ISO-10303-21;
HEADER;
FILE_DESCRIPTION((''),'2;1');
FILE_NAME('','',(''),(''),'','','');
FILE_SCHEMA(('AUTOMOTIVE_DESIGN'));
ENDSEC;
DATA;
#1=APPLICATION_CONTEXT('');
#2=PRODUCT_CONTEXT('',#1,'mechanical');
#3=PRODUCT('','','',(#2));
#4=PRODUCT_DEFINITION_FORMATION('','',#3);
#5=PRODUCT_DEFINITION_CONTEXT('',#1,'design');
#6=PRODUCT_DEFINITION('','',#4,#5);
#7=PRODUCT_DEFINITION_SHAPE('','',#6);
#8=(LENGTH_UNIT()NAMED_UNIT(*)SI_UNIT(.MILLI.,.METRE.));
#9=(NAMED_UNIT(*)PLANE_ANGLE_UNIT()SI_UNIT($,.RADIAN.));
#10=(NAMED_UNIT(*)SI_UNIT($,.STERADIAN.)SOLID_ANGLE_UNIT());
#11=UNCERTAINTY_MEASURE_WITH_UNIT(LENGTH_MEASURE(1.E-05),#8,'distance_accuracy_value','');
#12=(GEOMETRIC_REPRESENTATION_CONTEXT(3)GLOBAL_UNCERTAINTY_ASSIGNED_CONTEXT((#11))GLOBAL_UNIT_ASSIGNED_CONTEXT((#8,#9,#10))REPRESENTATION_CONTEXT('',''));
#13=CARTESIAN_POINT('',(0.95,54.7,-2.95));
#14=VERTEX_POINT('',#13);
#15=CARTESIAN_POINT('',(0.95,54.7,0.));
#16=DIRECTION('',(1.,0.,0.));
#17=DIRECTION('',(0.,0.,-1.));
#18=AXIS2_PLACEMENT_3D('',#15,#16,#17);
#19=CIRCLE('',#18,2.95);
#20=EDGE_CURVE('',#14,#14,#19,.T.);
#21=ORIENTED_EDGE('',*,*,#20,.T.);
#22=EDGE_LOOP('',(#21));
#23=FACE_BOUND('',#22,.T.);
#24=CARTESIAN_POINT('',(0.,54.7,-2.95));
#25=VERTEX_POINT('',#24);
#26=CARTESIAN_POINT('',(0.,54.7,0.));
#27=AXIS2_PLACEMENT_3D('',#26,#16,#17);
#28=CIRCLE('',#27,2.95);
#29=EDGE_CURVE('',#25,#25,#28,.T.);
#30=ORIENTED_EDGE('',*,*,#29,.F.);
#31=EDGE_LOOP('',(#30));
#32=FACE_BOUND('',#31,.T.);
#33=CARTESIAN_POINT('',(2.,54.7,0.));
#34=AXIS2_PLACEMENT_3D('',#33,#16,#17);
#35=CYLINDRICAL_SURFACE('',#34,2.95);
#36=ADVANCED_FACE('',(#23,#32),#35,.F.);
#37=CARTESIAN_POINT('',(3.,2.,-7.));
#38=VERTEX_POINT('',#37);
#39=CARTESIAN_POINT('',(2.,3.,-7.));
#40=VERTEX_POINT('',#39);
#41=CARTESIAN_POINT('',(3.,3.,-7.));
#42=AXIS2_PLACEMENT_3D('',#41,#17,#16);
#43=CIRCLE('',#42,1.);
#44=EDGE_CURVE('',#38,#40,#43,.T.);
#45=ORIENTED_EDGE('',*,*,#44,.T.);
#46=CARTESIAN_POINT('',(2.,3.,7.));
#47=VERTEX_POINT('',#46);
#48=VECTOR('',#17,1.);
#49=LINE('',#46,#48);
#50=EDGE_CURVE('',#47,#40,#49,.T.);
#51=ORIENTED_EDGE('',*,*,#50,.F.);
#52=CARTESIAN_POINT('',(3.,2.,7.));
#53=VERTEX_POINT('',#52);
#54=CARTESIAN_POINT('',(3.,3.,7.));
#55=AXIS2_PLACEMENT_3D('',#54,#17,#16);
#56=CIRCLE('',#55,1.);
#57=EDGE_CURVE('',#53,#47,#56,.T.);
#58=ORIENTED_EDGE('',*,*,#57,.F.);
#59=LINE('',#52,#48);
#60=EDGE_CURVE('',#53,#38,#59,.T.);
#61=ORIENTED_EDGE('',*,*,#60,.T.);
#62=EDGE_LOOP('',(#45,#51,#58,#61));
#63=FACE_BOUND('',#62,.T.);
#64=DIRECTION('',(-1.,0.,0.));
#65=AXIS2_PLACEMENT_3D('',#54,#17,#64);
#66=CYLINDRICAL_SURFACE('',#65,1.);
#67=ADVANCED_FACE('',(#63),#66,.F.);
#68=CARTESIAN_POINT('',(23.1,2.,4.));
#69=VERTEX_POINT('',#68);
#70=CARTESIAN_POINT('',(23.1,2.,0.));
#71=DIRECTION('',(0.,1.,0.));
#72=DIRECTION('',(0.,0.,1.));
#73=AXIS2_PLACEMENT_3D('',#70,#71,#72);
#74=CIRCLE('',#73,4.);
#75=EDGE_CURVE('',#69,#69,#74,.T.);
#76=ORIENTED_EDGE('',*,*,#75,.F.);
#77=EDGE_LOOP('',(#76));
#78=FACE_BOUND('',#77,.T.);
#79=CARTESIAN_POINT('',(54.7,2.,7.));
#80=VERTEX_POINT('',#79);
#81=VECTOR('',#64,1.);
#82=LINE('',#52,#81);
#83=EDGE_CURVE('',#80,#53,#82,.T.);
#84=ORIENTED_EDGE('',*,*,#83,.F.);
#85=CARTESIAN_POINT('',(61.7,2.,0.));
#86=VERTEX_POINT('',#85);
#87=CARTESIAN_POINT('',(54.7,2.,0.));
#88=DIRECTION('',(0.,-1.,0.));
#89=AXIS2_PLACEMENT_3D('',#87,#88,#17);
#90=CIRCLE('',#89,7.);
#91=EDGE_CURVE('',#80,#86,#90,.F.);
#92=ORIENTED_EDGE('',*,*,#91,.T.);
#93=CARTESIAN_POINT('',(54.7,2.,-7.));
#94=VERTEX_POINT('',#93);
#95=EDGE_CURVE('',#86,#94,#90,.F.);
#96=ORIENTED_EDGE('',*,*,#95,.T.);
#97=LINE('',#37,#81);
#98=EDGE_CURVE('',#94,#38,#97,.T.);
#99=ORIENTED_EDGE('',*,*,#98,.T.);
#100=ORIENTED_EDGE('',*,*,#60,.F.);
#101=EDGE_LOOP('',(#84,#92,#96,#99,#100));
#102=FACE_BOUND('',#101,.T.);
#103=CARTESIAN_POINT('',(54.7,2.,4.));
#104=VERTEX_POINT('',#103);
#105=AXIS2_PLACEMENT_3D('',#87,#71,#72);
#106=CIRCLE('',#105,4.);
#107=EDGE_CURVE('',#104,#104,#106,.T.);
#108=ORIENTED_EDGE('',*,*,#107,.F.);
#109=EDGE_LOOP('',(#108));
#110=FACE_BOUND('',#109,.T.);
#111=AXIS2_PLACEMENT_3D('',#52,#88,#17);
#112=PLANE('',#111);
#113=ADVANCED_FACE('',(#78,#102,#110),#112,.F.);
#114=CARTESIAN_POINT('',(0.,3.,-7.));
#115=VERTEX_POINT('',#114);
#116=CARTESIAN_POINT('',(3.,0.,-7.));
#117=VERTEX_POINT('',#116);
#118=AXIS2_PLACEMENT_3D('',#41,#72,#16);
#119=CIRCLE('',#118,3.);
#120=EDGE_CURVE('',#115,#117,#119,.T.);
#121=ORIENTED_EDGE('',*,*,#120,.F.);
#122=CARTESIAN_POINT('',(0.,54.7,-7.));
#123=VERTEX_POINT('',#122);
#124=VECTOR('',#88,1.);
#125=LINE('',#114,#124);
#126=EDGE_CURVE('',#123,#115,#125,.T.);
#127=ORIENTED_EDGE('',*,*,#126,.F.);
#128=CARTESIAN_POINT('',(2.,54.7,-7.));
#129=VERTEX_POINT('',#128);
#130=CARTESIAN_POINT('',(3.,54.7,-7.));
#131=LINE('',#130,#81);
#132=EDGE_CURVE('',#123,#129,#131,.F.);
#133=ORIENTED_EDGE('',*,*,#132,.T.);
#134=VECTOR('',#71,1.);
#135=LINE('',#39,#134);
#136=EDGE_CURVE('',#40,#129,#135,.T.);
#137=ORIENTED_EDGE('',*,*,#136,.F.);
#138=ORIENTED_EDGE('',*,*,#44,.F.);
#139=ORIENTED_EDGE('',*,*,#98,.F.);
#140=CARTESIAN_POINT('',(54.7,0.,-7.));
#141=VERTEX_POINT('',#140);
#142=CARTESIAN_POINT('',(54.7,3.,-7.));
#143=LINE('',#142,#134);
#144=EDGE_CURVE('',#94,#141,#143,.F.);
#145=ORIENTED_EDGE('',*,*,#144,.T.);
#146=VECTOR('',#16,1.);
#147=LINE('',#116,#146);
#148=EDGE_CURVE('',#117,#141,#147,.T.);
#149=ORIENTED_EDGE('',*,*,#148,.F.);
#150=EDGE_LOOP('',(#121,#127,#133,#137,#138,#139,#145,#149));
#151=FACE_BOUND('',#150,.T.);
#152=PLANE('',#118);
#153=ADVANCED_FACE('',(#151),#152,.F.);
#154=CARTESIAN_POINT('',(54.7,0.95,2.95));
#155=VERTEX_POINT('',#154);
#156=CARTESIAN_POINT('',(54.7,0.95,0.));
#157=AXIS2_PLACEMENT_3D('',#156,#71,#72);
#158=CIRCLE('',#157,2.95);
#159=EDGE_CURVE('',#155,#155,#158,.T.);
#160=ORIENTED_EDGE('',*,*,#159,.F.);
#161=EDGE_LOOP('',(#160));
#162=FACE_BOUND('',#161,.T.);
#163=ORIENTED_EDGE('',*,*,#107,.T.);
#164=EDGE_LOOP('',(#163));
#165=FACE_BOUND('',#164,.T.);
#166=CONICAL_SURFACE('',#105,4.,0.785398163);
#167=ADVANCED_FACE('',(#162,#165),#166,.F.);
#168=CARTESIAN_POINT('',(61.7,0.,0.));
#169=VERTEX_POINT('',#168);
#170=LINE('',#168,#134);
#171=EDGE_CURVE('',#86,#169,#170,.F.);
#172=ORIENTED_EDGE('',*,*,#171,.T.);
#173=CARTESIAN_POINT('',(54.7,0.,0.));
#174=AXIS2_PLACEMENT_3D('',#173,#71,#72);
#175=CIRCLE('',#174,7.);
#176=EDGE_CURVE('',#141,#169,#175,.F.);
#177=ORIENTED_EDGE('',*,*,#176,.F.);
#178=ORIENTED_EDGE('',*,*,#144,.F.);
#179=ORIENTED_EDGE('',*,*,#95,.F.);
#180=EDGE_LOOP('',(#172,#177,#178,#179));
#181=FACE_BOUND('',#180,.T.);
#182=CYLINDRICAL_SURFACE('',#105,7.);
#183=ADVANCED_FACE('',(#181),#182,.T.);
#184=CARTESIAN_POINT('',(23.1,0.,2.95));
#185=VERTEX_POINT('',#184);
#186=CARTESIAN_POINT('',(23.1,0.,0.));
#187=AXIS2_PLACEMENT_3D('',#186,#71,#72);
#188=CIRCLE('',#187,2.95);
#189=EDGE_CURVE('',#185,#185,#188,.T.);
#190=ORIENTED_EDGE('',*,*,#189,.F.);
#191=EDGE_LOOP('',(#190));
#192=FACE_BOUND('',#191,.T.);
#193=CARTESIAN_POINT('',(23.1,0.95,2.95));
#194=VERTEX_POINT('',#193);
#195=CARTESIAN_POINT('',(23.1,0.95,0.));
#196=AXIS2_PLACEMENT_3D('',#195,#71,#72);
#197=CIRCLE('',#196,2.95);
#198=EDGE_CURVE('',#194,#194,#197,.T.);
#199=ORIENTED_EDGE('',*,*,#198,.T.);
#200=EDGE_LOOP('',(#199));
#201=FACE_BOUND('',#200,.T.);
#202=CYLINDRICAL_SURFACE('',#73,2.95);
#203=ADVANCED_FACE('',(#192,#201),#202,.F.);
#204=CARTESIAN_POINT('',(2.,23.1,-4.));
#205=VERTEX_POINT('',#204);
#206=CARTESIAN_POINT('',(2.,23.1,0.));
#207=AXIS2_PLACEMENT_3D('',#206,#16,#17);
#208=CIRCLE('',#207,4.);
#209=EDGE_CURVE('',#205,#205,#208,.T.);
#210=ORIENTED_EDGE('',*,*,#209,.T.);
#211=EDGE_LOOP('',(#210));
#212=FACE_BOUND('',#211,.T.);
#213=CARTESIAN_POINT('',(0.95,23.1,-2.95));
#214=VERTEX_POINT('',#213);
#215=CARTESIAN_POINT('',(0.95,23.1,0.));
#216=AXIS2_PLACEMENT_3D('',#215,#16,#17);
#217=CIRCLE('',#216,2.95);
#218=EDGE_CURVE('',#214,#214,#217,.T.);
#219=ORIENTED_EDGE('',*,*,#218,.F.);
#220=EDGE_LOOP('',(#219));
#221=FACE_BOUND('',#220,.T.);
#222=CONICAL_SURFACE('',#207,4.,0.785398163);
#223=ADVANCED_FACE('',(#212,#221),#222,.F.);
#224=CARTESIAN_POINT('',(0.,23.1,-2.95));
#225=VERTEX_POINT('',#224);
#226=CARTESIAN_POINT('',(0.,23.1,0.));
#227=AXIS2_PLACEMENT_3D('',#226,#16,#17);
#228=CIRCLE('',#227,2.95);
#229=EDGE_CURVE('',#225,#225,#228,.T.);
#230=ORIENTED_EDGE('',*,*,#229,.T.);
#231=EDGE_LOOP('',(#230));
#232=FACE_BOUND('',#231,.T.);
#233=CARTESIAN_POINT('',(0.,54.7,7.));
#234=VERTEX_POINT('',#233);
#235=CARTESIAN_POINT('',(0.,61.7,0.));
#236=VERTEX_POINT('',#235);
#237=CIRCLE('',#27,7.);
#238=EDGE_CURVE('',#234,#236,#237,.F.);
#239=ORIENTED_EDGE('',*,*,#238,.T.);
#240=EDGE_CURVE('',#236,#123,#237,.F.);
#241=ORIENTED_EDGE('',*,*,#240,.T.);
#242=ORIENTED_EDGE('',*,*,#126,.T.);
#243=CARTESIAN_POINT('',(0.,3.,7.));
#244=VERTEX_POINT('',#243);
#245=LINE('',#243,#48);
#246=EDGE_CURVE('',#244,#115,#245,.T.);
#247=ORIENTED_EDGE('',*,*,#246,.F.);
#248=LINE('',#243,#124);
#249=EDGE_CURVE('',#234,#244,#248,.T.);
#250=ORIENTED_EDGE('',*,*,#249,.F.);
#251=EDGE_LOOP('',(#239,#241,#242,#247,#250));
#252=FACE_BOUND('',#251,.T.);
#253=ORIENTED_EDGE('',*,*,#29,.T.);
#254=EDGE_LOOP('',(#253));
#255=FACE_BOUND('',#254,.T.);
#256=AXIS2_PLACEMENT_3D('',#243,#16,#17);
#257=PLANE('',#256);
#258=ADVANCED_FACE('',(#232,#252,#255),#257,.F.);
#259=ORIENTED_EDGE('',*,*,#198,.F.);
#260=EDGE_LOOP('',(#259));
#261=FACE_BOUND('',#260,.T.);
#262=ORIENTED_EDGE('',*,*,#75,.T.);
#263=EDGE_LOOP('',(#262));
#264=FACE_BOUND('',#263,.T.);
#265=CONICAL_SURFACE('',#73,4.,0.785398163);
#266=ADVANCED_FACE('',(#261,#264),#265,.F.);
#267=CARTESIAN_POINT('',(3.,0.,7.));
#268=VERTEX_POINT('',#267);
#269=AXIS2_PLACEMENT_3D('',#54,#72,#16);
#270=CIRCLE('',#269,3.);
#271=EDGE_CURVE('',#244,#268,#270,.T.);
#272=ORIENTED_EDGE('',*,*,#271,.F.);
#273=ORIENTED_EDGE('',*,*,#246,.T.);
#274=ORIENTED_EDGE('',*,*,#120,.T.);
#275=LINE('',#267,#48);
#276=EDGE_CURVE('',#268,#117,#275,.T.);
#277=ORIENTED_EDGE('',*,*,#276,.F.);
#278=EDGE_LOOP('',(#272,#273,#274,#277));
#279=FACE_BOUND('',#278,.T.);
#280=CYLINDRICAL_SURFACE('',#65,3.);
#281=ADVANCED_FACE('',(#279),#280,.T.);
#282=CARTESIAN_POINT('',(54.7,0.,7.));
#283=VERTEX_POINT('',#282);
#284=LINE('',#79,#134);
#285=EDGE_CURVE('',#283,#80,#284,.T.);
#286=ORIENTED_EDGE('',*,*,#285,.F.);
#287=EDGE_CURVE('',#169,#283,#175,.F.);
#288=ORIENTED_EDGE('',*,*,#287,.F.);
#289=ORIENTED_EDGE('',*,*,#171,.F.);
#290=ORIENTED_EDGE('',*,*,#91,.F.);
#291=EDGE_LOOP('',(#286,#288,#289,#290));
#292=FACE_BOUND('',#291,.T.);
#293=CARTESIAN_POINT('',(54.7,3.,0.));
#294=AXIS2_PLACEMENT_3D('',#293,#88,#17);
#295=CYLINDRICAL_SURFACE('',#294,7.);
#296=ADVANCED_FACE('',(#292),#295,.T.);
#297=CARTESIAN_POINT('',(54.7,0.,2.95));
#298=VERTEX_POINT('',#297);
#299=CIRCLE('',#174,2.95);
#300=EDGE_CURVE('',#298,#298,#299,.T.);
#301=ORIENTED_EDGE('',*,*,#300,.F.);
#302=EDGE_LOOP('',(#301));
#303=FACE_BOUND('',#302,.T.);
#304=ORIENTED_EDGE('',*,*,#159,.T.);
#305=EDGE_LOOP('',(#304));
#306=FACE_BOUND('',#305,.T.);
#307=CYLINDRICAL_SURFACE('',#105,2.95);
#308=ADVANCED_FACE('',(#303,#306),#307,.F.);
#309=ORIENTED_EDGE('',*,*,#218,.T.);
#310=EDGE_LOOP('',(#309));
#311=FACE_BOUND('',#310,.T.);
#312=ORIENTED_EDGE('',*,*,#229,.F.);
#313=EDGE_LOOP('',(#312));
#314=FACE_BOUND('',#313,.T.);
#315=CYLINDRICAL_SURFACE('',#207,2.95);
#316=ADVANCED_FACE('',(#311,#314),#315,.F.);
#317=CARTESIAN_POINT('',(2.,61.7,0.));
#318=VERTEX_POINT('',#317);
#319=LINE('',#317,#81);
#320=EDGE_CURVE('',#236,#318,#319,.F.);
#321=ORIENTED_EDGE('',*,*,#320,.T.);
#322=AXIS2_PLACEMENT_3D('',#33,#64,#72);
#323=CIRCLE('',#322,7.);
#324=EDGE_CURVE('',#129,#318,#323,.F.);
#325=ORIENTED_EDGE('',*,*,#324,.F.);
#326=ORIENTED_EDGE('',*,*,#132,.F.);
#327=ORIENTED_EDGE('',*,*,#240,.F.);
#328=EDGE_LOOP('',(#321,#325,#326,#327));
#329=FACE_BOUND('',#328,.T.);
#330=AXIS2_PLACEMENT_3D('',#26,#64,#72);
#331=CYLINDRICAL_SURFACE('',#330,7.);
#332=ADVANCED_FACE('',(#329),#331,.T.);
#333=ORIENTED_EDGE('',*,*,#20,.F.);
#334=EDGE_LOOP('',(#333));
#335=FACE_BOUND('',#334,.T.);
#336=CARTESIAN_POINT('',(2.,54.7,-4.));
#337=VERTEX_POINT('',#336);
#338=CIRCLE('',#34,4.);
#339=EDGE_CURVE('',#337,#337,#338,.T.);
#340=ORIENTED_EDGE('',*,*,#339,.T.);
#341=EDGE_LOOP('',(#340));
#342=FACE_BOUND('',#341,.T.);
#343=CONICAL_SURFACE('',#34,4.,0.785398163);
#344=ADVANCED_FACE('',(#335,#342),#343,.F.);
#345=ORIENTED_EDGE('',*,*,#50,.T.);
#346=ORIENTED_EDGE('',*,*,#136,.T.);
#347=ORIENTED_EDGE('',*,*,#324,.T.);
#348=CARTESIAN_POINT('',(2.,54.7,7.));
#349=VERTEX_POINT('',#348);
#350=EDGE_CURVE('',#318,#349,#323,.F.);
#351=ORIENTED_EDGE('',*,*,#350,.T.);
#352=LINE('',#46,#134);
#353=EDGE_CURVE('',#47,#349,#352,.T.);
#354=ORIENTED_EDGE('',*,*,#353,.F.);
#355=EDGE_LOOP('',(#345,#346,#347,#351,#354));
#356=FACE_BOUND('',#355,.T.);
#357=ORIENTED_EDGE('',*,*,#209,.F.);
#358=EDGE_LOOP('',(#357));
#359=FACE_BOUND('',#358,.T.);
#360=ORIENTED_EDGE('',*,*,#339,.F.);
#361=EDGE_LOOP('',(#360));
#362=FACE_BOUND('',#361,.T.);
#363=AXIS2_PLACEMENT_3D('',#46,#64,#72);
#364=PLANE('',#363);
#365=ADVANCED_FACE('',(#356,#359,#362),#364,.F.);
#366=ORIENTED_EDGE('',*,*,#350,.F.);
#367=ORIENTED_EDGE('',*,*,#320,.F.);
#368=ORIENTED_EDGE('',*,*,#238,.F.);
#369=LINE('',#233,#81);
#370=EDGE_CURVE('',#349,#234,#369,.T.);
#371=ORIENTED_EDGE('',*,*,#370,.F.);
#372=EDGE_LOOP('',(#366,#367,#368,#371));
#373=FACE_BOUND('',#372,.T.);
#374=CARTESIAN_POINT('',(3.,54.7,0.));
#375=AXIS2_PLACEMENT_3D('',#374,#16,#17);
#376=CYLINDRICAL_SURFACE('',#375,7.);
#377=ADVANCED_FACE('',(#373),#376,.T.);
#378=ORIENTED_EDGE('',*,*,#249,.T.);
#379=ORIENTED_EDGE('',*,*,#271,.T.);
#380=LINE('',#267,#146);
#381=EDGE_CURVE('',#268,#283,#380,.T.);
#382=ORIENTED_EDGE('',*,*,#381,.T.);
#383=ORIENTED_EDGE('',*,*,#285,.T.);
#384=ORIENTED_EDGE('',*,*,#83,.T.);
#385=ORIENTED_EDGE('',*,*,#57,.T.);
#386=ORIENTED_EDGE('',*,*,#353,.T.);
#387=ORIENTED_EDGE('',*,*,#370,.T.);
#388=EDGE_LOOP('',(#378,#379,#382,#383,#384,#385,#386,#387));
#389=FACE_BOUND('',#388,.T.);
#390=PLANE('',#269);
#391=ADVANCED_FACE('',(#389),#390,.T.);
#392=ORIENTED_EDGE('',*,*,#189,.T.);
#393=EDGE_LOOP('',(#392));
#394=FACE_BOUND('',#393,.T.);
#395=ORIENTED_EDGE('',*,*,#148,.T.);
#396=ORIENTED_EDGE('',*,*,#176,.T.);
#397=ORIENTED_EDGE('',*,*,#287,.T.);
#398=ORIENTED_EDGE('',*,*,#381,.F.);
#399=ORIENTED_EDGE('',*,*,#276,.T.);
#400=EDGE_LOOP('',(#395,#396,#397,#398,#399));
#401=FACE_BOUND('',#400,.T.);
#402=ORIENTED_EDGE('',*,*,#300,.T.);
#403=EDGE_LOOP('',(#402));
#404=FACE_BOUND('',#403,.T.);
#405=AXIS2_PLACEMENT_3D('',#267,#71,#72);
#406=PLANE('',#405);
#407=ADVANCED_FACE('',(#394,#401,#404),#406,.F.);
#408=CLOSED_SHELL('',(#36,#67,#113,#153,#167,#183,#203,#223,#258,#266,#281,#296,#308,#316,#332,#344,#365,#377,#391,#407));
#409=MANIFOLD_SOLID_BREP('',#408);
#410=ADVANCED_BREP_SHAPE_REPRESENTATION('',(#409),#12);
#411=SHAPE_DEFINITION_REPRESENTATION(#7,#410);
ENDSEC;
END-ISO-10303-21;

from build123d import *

# Parameters (mm, degrees)
BOSS_EXTRU_1_DEPTH                         = 7
CONG_1_R                                   = 7
FRAISAGE_POUR_VIS_T_TE_FRAIS_E_6_2_COUNT   = 2
FRAISAGE_POUR_VIS_T_TE_FRAIS_E_6_2_PITCH   = 31.6
FRAISAGE_POUR_VIS_T_TE_FRAIS_E_6_3_A_COUNT = 2
FRAISAGE_POUR_VIS_T_TE_FRAIS_E_6_3_A_PITCH = 31.6


with BuildPart() as part:
    # Esquisse1 → Boss.-Extru.1 (new, symmetric)
    with BuildSketch(Plane.XY):
        with BuildLine():
            Line((0, 3), (0, 61.7))
            Line((0, 61.7), (2, 61.7))
            Line((2, 61.7), (2, 3))
            ThreePointArc((2, 3), (2.292893219, 2.292893219), (3, 2))
            Line((3, 2), (61.7, 2))
            Line((61.7, 2), (61.7, 0))
            Line((61.7, 0), (3, 0))
            ThreePointArc((3, 0), (0.878679656, 0.878679656), (0, 3))
        make_face()
    extrude(amount=BOSS_EXTRU_1_DEPTH, both=True)

    # Congé1
    cong_1_edges = [part.edges().sort_by_distance(p)[0] for p in [
        (1, 61.7, -7),
        (1, 61.7, 7),
        (61.7, 1, -7),
        (61.7, 1, 7),
    ]]
    fillet(cong_1_edges, radius=CONG_1_R - 0.0001)  # a hair under: the kernel refuses the full size

    # Esquisse2 → Fraisage pour vis _ t_te frais_e _ 6 pan (revolve, cut)
    with BuildSketch(Plane(origin=(54.7, 2, 0), x_dir=(0, 0, 1), z_dir=(1, 0, 0))):
        Polygon((0, 0), (0, 2), (2.95, 2), (2.95, 1.05), (4, 0), align=None)
    fraisage_pour_vis_t_te_frais_e_6_pan = revolve(axis=Axis((54.7, 8.35, 0), (0, -1, 0)), mode=Mode.SUBTRACT)

    # Fraisage pour vis _ t_te frais_e _ 6 2: Fraisage pour vis _ t_te frais_e _ 6 pan ×2
    with Locations(*[(-i * FRAISAGE_POUR_VIS_T_TE_FRAIS_E_6_2_PITCH, 0, 0) for i in range(1, FRAISAGE_POUR_VIS_T_TE_FRAIS_E_6_2_COUNT)]):
        add(fraisage_pour_vis_t_te_frais_e_6_pan, mode=Mode.SUBTRACT)

    # Esquisse4 → Fraisage pour vis _ t_te frais_e _ 6 3 (revolve, cut)
    with BuildSketch(Plane(origin=(2, 54.7, 0), x_dir=(0, 0, -1), z_dir=(0, 1, 0))):
        Polygon((0, 0), (0, 2), (2.95, 2), (2.95, 1.05), (4, 0), align=None)
    fraisage_pour_vis_t_te_frais_e_6_3 = revolve(axis=Axis((8.35, 54.7, 0), (-1, 0, 0)), mode=Mode.SUBTRACT)

    # Fraisage pour vis _ t_te frais_e _ 6 3 a: Fraisage pour vis _ t_te frais_e _ 6 3 ×2
    with Locations(*[(0, -i * FRAISAGE_POUR_VIS_T_TE_FRAIS_E_6_3_A_PITCH, 0) for i in range(1, FRAISAGE_POUR_VIS_T_TE_FRAIS_E_6_3_A_COUNT)]):
        add(fraisage_pour_vis_t_te_frais_e_6_3, mode=Mode.SUBTRACT)


solid = part.part
